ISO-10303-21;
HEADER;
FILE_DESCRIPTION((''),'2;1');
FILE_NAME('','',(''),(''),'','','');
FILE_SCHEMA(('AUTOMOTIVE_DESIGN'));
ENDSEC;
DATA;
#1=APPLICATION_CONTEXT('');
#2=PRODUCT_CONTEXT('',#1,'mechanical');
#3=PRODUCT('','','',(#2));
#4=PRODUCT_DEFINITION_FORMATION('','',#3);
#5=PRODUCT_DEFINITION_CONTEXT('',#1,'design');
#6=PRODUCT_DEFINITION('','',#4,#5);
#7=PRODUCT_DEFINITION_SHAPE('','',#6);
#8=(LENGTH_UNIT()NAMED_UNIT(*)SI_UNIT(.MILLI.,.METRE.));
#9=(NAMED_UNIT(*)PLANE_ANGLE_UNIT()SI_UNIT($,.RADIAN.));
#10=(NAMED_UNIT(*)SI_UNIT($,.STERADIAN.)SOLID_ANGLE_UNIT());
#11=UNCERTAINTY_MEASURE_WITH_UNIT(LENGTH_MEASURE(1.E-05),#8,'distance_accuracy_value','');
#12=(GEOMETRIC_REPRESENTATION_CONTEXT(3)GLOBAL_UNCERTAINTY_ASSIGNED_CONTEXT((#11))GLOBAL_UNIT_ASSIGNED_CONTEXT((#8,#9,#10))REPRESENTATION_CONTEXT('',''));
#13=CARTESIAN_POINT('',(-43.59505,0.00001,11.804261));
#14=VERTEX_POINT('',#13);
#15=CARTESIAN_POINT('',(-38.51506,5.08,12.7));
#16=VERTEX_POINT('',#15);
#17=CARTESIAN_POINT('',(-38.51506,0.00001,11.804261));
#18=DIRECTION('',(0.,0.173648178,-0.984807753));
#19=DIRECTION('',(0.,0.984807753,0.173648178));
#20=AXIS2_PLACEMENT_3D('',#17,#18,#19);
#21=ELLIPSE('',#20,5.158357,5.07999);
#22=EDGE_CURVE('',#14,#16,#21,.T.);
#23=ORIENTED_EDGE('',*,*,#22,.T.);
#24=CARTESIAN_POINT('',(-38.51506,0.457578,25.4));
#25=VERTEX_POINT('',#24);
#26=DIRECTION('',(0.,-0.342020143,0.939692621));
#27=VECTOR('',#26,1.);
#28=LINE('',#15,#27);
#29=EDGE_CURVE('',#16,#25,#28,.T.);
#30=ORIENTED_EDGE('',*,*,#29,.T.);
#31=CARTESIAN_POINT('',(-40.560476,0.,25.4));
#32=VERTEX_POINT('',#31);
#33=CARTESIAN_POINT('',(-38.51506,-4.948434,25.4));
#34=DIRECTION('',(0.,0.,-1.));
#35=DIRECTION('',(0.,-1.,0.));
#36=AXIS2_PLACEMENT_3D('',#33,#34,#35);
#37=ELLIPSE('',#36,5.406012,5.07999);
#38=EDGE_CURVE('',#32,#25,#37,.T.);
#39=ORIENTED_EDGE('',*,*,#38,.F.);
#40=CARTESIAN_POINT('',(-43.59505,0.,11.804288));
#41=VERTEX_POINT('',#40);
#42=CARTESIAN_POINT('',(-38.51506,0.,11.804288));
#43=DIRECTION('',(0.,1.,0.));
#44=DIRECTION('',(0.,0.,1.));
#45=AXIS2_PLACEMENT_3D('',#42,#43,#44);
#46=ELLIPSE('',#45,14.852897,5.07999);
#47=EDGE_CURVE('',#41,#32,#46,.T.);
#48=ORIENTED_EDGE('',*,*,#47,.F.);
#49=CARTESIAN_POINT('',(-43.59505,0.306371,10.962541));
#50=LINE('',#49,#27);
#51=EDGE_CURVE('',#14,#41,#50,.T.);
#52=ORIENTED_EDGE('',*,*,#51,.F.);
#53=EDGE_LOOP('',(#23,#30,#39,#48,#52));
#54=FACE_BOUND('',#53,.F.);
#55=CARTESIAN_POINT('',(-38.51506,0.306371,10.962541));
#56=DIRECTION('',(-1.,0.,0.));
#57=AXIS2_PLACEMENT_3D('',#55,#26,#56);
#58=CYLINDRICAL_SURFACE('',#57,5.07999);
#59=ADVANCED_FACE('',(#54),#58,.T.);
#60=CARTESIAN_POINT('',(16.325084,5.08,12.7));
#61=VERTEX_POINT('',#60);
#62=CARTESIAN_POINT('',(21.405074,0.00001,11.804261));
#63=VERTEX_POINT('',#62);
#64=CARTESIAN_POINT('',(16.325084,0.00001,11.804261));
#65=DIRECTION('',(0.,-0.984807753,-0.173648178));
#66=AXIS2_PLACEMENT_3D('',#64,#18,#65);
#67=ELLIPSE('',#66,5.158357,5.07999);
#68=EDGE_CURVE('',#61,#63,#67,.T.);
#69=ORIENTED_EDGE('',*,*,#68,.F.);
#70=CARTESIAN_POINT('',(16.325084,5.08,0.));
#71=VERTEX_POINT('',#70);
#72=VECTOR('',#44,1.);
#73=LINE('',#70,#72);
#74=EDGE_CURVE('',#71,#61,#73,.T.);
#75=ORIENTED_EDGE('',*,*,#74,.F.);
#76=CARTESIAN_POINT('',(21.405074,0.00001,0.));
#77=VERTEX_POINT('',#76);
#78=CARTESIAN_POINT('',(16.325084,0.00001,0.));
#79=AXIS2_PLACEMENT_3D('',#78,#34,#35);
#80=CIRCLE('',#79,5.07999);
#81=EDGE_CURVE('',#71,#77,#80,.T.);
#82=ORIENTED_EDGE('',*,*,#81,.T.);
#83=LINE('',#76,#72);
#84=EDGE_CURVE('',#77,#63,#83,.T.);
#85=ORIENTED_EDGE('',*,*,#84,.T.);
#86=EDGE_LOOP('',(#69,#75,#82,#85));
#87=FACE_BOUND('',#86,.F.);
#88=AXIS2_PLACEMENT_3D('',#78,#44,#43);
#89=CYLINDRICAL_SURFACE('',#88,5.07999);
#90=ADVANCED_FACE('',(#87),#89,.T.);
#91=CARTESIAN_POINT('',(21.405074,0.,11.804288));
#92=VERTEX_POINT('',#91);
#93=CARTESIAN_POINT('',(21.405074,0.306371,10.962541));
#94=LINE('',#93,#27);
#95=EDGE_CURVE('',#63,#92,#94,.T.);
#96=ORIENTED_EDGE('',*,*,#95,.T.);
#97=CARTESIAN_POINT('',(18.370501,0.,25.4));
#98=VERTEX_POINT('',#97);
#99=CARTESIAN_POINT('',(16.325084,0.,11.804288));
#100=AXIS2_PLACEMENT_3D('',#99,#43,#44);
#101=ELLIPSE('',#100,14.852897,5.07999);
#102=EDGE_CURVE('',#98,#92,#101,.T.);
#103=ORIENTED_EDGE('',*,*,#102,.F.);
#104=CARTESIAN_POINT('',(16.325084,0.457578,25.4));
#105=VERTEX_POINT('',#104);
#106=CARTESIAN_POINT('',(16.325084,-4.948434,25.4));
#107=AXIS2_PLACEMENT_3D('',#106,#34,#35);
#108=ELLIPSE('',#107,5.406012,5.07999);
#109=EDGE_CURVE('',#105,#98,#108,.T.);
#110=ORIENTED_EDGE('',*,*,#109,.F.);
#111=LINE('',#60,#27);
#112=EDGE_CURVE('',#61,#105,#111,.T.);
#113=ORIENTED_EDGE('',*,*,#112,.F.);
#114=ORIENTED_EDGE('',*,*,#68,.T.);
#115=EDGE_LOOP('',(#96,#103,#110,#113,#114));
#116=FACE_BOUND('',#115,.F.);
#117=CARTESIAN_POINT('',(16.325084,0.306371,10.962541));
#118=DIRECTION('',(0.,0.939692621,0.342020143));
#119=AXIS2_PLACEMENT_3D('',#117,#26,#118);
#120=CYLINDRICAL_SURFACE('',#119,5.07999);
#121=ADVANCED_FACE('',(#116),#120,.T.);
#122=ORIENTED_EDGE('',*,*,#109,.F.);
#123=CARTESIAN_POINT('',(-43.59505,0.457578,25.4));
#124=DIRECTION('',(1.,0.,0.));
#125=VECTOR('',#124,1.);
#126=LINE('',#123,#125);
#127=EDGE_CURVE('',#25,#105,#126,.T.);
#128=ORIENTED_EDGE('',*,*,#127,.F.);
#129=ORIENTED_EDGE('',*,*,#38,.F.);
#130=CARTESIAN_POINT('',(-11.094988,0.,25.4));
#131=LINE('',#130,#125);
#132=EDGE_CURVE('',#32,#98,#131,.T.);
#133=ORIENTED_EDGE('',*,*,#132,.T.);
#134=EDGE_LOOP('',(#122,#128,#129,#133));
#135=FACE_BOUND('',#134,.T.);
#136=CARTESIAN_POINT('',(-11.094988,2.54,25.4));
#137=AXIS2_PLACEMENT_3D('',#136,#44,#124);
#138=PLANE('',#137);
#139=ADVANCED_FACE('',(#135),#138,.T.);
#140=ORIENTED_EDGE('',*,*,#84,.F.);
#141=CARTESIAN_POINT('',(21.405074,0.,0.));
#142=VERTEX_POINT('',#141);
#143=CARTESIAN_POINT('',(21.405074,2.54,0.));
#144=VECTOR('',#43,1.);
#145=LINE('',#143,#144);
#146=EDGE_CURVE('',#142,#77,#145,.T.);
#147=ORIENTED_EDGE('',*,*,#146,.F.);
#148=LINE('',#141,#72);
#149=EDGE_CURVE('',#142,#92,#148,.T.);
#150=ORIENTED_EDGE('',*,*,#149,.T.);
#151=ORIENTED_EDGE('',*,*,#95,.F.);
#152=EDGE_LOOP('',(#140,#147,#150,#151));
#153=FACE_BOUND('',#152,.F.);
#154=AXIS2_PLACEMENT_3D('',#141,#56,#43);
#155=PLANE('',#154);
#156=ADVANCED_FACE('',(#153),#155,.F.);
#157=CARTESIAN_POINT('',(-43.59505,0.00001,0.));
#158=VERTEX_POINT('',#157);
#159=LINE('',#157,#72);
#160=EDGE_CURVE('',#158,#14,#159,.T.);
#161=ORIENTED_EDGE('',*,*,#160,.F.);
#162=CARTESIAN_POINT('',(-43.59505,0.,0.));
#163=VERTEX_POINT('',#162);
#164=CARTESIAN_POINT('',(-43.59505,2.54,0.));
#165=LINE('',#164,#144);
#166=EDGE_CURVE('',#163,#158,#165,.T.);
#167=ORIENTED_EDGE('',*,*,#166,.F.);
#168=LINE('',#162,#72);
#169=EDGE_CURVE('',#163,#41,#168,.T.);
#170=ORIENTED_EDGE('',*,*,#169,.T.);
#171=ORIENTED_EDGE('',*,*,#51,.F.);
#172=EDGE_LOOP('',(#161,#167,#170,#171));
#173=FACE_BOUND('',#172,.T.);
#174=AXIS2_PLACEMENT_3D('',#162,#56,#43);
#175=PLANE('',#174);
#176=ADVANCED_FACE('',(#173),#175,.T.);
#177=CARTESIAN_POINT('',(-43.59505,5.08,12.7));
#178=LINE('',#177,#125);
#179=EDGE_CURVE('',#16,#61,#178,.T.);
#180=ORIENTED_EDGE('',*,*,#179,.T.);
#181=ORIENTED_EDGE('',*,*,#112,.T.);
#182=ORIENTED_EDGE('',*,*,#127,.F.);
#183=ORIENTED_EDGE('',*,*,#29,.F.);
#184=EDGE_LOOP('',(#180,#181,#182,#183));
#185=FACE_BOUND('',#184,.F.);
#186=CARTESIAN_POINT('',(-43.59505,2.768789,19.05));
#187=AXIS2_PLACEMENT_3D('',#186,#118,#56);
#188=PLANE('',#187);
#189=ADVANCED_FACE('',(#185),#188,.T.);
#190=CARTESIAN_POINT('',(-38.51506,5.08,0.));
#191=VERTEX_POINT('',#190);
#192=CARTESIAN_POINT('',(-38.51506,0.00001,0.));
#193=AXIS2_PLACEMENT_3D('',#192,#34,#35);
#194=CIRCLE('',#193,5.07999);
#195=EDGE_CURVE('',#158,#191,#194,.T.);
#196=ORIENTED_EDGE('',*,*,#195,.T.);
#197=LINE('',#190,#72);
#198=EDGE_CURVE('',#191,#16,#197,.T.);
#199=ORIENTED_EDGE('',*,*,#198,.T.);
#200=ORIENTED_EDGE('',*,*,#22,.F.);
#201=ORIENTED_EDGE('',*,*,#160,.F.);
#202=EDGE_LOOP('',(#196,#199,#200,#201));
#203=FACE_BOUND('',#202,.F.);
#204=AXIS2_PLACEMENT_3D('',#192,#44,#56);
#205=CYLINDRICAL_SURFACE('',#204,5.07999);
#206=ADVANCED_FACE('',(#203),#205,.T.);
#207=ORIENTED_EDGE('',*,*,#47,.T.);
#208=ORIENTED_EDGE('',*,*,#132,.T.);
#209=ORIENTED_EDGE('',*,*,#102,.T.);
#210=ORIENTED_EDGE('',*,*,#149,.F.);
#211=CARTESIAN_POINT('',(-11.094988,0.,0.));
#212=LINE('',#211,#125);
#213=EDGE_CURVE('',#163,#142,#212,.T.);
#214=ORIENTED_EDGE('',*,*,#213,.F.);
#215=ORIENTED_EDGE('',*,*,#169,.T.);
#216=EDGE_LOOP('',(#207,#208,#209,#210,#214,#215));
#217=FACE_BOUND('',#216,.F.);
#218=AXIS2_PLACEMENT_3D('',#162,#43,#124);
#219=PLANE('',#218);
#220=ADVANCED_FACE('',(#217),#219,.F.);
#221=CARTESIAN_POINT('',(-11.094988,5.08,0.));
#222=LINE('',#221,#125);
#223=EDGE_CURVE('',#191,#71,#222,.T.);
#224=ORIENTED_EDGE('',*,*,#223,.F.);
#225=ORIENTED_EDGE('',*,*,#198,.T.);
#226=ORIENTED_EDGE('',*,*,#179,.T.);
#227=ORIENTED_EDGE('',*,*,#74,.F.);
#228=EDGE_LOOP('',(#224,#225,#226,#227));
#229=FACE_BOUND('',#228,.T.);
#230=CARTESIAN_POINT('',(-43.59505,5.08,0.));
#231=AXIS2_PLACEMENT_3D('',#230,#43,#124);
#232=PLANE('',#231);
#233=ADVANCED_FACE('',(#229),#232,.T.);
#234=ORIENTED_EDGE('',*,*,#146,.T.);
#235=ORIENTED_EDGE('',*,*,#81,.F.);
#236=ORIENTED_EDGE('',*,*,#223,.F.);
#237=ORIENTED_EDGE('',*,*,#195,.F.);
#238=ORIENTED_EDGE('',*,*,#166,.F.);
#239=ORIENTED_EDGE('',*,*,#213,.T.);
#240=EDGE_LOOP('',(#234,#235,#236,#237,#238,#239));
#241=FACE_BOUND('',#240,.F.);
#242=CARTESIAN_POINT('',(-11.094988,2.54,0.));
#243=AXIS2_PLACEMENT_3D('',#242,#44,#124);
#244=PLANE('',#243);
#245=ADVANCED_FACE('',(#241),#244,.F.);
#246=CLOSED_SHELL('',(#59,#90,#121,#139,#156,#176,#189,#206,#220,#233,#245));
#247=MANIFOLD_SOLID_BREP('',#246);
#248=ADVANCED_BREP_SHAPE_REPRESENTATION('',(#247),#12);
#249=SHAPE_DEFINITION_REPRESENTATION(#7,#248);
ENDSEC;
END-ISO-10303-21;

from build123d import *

# Parameters (mm, degrees)
F0_W     = 65.000124
F0_H     = 5.08
F1_DEPTH = 25.4
F2_SIZE2 = 4.6224219752
F2_SIZE  = 12.7
F3_R     = 5.07999


# Not quite as in the source:
# - a fillet or chamfer is up to 0.001 mm smaller than in the source, because OpenCascade refuses the exact size


with BuildPart() as f1:
    # F0 (on Top) → F1 (new body)
    with BuildSketch(Plane.XY):
        with Locations((-11.0949875303, 2.54)):
            Rectangle(F0_W, F0_H)
    extrude(amount=F1_DEPTH)

    # F2
    f2_edges = [f1.edges().sort_by_distance(p)[0] for p in [
        (-11.094988, 5.08, 25.4),
    ]]
    f2_side = f1.faces().sort_by_distance((-11.094988, 5.08, 12.7))[0]
    chamfer(f2_edges, length=F2_SIZE, length2=F2_SIZE2, reference=f2_side)

    # F3 (radius 5.08 in the source; OpenCascade refuses exactly that, so slightly less here)
    f3_edges = [f1.edges().sort_by_distance(p)[0] for p in [
        (21.405074, 2.768789, 19.05),
        (21.405074, 5.08, 6.35),
        (-43.59505, 5.08, 6.35),
        (-43.59505, 2.768789, 19.05),
    ]]
    fillet(f3_edges, radius=F3_R)


solid = f1.part
